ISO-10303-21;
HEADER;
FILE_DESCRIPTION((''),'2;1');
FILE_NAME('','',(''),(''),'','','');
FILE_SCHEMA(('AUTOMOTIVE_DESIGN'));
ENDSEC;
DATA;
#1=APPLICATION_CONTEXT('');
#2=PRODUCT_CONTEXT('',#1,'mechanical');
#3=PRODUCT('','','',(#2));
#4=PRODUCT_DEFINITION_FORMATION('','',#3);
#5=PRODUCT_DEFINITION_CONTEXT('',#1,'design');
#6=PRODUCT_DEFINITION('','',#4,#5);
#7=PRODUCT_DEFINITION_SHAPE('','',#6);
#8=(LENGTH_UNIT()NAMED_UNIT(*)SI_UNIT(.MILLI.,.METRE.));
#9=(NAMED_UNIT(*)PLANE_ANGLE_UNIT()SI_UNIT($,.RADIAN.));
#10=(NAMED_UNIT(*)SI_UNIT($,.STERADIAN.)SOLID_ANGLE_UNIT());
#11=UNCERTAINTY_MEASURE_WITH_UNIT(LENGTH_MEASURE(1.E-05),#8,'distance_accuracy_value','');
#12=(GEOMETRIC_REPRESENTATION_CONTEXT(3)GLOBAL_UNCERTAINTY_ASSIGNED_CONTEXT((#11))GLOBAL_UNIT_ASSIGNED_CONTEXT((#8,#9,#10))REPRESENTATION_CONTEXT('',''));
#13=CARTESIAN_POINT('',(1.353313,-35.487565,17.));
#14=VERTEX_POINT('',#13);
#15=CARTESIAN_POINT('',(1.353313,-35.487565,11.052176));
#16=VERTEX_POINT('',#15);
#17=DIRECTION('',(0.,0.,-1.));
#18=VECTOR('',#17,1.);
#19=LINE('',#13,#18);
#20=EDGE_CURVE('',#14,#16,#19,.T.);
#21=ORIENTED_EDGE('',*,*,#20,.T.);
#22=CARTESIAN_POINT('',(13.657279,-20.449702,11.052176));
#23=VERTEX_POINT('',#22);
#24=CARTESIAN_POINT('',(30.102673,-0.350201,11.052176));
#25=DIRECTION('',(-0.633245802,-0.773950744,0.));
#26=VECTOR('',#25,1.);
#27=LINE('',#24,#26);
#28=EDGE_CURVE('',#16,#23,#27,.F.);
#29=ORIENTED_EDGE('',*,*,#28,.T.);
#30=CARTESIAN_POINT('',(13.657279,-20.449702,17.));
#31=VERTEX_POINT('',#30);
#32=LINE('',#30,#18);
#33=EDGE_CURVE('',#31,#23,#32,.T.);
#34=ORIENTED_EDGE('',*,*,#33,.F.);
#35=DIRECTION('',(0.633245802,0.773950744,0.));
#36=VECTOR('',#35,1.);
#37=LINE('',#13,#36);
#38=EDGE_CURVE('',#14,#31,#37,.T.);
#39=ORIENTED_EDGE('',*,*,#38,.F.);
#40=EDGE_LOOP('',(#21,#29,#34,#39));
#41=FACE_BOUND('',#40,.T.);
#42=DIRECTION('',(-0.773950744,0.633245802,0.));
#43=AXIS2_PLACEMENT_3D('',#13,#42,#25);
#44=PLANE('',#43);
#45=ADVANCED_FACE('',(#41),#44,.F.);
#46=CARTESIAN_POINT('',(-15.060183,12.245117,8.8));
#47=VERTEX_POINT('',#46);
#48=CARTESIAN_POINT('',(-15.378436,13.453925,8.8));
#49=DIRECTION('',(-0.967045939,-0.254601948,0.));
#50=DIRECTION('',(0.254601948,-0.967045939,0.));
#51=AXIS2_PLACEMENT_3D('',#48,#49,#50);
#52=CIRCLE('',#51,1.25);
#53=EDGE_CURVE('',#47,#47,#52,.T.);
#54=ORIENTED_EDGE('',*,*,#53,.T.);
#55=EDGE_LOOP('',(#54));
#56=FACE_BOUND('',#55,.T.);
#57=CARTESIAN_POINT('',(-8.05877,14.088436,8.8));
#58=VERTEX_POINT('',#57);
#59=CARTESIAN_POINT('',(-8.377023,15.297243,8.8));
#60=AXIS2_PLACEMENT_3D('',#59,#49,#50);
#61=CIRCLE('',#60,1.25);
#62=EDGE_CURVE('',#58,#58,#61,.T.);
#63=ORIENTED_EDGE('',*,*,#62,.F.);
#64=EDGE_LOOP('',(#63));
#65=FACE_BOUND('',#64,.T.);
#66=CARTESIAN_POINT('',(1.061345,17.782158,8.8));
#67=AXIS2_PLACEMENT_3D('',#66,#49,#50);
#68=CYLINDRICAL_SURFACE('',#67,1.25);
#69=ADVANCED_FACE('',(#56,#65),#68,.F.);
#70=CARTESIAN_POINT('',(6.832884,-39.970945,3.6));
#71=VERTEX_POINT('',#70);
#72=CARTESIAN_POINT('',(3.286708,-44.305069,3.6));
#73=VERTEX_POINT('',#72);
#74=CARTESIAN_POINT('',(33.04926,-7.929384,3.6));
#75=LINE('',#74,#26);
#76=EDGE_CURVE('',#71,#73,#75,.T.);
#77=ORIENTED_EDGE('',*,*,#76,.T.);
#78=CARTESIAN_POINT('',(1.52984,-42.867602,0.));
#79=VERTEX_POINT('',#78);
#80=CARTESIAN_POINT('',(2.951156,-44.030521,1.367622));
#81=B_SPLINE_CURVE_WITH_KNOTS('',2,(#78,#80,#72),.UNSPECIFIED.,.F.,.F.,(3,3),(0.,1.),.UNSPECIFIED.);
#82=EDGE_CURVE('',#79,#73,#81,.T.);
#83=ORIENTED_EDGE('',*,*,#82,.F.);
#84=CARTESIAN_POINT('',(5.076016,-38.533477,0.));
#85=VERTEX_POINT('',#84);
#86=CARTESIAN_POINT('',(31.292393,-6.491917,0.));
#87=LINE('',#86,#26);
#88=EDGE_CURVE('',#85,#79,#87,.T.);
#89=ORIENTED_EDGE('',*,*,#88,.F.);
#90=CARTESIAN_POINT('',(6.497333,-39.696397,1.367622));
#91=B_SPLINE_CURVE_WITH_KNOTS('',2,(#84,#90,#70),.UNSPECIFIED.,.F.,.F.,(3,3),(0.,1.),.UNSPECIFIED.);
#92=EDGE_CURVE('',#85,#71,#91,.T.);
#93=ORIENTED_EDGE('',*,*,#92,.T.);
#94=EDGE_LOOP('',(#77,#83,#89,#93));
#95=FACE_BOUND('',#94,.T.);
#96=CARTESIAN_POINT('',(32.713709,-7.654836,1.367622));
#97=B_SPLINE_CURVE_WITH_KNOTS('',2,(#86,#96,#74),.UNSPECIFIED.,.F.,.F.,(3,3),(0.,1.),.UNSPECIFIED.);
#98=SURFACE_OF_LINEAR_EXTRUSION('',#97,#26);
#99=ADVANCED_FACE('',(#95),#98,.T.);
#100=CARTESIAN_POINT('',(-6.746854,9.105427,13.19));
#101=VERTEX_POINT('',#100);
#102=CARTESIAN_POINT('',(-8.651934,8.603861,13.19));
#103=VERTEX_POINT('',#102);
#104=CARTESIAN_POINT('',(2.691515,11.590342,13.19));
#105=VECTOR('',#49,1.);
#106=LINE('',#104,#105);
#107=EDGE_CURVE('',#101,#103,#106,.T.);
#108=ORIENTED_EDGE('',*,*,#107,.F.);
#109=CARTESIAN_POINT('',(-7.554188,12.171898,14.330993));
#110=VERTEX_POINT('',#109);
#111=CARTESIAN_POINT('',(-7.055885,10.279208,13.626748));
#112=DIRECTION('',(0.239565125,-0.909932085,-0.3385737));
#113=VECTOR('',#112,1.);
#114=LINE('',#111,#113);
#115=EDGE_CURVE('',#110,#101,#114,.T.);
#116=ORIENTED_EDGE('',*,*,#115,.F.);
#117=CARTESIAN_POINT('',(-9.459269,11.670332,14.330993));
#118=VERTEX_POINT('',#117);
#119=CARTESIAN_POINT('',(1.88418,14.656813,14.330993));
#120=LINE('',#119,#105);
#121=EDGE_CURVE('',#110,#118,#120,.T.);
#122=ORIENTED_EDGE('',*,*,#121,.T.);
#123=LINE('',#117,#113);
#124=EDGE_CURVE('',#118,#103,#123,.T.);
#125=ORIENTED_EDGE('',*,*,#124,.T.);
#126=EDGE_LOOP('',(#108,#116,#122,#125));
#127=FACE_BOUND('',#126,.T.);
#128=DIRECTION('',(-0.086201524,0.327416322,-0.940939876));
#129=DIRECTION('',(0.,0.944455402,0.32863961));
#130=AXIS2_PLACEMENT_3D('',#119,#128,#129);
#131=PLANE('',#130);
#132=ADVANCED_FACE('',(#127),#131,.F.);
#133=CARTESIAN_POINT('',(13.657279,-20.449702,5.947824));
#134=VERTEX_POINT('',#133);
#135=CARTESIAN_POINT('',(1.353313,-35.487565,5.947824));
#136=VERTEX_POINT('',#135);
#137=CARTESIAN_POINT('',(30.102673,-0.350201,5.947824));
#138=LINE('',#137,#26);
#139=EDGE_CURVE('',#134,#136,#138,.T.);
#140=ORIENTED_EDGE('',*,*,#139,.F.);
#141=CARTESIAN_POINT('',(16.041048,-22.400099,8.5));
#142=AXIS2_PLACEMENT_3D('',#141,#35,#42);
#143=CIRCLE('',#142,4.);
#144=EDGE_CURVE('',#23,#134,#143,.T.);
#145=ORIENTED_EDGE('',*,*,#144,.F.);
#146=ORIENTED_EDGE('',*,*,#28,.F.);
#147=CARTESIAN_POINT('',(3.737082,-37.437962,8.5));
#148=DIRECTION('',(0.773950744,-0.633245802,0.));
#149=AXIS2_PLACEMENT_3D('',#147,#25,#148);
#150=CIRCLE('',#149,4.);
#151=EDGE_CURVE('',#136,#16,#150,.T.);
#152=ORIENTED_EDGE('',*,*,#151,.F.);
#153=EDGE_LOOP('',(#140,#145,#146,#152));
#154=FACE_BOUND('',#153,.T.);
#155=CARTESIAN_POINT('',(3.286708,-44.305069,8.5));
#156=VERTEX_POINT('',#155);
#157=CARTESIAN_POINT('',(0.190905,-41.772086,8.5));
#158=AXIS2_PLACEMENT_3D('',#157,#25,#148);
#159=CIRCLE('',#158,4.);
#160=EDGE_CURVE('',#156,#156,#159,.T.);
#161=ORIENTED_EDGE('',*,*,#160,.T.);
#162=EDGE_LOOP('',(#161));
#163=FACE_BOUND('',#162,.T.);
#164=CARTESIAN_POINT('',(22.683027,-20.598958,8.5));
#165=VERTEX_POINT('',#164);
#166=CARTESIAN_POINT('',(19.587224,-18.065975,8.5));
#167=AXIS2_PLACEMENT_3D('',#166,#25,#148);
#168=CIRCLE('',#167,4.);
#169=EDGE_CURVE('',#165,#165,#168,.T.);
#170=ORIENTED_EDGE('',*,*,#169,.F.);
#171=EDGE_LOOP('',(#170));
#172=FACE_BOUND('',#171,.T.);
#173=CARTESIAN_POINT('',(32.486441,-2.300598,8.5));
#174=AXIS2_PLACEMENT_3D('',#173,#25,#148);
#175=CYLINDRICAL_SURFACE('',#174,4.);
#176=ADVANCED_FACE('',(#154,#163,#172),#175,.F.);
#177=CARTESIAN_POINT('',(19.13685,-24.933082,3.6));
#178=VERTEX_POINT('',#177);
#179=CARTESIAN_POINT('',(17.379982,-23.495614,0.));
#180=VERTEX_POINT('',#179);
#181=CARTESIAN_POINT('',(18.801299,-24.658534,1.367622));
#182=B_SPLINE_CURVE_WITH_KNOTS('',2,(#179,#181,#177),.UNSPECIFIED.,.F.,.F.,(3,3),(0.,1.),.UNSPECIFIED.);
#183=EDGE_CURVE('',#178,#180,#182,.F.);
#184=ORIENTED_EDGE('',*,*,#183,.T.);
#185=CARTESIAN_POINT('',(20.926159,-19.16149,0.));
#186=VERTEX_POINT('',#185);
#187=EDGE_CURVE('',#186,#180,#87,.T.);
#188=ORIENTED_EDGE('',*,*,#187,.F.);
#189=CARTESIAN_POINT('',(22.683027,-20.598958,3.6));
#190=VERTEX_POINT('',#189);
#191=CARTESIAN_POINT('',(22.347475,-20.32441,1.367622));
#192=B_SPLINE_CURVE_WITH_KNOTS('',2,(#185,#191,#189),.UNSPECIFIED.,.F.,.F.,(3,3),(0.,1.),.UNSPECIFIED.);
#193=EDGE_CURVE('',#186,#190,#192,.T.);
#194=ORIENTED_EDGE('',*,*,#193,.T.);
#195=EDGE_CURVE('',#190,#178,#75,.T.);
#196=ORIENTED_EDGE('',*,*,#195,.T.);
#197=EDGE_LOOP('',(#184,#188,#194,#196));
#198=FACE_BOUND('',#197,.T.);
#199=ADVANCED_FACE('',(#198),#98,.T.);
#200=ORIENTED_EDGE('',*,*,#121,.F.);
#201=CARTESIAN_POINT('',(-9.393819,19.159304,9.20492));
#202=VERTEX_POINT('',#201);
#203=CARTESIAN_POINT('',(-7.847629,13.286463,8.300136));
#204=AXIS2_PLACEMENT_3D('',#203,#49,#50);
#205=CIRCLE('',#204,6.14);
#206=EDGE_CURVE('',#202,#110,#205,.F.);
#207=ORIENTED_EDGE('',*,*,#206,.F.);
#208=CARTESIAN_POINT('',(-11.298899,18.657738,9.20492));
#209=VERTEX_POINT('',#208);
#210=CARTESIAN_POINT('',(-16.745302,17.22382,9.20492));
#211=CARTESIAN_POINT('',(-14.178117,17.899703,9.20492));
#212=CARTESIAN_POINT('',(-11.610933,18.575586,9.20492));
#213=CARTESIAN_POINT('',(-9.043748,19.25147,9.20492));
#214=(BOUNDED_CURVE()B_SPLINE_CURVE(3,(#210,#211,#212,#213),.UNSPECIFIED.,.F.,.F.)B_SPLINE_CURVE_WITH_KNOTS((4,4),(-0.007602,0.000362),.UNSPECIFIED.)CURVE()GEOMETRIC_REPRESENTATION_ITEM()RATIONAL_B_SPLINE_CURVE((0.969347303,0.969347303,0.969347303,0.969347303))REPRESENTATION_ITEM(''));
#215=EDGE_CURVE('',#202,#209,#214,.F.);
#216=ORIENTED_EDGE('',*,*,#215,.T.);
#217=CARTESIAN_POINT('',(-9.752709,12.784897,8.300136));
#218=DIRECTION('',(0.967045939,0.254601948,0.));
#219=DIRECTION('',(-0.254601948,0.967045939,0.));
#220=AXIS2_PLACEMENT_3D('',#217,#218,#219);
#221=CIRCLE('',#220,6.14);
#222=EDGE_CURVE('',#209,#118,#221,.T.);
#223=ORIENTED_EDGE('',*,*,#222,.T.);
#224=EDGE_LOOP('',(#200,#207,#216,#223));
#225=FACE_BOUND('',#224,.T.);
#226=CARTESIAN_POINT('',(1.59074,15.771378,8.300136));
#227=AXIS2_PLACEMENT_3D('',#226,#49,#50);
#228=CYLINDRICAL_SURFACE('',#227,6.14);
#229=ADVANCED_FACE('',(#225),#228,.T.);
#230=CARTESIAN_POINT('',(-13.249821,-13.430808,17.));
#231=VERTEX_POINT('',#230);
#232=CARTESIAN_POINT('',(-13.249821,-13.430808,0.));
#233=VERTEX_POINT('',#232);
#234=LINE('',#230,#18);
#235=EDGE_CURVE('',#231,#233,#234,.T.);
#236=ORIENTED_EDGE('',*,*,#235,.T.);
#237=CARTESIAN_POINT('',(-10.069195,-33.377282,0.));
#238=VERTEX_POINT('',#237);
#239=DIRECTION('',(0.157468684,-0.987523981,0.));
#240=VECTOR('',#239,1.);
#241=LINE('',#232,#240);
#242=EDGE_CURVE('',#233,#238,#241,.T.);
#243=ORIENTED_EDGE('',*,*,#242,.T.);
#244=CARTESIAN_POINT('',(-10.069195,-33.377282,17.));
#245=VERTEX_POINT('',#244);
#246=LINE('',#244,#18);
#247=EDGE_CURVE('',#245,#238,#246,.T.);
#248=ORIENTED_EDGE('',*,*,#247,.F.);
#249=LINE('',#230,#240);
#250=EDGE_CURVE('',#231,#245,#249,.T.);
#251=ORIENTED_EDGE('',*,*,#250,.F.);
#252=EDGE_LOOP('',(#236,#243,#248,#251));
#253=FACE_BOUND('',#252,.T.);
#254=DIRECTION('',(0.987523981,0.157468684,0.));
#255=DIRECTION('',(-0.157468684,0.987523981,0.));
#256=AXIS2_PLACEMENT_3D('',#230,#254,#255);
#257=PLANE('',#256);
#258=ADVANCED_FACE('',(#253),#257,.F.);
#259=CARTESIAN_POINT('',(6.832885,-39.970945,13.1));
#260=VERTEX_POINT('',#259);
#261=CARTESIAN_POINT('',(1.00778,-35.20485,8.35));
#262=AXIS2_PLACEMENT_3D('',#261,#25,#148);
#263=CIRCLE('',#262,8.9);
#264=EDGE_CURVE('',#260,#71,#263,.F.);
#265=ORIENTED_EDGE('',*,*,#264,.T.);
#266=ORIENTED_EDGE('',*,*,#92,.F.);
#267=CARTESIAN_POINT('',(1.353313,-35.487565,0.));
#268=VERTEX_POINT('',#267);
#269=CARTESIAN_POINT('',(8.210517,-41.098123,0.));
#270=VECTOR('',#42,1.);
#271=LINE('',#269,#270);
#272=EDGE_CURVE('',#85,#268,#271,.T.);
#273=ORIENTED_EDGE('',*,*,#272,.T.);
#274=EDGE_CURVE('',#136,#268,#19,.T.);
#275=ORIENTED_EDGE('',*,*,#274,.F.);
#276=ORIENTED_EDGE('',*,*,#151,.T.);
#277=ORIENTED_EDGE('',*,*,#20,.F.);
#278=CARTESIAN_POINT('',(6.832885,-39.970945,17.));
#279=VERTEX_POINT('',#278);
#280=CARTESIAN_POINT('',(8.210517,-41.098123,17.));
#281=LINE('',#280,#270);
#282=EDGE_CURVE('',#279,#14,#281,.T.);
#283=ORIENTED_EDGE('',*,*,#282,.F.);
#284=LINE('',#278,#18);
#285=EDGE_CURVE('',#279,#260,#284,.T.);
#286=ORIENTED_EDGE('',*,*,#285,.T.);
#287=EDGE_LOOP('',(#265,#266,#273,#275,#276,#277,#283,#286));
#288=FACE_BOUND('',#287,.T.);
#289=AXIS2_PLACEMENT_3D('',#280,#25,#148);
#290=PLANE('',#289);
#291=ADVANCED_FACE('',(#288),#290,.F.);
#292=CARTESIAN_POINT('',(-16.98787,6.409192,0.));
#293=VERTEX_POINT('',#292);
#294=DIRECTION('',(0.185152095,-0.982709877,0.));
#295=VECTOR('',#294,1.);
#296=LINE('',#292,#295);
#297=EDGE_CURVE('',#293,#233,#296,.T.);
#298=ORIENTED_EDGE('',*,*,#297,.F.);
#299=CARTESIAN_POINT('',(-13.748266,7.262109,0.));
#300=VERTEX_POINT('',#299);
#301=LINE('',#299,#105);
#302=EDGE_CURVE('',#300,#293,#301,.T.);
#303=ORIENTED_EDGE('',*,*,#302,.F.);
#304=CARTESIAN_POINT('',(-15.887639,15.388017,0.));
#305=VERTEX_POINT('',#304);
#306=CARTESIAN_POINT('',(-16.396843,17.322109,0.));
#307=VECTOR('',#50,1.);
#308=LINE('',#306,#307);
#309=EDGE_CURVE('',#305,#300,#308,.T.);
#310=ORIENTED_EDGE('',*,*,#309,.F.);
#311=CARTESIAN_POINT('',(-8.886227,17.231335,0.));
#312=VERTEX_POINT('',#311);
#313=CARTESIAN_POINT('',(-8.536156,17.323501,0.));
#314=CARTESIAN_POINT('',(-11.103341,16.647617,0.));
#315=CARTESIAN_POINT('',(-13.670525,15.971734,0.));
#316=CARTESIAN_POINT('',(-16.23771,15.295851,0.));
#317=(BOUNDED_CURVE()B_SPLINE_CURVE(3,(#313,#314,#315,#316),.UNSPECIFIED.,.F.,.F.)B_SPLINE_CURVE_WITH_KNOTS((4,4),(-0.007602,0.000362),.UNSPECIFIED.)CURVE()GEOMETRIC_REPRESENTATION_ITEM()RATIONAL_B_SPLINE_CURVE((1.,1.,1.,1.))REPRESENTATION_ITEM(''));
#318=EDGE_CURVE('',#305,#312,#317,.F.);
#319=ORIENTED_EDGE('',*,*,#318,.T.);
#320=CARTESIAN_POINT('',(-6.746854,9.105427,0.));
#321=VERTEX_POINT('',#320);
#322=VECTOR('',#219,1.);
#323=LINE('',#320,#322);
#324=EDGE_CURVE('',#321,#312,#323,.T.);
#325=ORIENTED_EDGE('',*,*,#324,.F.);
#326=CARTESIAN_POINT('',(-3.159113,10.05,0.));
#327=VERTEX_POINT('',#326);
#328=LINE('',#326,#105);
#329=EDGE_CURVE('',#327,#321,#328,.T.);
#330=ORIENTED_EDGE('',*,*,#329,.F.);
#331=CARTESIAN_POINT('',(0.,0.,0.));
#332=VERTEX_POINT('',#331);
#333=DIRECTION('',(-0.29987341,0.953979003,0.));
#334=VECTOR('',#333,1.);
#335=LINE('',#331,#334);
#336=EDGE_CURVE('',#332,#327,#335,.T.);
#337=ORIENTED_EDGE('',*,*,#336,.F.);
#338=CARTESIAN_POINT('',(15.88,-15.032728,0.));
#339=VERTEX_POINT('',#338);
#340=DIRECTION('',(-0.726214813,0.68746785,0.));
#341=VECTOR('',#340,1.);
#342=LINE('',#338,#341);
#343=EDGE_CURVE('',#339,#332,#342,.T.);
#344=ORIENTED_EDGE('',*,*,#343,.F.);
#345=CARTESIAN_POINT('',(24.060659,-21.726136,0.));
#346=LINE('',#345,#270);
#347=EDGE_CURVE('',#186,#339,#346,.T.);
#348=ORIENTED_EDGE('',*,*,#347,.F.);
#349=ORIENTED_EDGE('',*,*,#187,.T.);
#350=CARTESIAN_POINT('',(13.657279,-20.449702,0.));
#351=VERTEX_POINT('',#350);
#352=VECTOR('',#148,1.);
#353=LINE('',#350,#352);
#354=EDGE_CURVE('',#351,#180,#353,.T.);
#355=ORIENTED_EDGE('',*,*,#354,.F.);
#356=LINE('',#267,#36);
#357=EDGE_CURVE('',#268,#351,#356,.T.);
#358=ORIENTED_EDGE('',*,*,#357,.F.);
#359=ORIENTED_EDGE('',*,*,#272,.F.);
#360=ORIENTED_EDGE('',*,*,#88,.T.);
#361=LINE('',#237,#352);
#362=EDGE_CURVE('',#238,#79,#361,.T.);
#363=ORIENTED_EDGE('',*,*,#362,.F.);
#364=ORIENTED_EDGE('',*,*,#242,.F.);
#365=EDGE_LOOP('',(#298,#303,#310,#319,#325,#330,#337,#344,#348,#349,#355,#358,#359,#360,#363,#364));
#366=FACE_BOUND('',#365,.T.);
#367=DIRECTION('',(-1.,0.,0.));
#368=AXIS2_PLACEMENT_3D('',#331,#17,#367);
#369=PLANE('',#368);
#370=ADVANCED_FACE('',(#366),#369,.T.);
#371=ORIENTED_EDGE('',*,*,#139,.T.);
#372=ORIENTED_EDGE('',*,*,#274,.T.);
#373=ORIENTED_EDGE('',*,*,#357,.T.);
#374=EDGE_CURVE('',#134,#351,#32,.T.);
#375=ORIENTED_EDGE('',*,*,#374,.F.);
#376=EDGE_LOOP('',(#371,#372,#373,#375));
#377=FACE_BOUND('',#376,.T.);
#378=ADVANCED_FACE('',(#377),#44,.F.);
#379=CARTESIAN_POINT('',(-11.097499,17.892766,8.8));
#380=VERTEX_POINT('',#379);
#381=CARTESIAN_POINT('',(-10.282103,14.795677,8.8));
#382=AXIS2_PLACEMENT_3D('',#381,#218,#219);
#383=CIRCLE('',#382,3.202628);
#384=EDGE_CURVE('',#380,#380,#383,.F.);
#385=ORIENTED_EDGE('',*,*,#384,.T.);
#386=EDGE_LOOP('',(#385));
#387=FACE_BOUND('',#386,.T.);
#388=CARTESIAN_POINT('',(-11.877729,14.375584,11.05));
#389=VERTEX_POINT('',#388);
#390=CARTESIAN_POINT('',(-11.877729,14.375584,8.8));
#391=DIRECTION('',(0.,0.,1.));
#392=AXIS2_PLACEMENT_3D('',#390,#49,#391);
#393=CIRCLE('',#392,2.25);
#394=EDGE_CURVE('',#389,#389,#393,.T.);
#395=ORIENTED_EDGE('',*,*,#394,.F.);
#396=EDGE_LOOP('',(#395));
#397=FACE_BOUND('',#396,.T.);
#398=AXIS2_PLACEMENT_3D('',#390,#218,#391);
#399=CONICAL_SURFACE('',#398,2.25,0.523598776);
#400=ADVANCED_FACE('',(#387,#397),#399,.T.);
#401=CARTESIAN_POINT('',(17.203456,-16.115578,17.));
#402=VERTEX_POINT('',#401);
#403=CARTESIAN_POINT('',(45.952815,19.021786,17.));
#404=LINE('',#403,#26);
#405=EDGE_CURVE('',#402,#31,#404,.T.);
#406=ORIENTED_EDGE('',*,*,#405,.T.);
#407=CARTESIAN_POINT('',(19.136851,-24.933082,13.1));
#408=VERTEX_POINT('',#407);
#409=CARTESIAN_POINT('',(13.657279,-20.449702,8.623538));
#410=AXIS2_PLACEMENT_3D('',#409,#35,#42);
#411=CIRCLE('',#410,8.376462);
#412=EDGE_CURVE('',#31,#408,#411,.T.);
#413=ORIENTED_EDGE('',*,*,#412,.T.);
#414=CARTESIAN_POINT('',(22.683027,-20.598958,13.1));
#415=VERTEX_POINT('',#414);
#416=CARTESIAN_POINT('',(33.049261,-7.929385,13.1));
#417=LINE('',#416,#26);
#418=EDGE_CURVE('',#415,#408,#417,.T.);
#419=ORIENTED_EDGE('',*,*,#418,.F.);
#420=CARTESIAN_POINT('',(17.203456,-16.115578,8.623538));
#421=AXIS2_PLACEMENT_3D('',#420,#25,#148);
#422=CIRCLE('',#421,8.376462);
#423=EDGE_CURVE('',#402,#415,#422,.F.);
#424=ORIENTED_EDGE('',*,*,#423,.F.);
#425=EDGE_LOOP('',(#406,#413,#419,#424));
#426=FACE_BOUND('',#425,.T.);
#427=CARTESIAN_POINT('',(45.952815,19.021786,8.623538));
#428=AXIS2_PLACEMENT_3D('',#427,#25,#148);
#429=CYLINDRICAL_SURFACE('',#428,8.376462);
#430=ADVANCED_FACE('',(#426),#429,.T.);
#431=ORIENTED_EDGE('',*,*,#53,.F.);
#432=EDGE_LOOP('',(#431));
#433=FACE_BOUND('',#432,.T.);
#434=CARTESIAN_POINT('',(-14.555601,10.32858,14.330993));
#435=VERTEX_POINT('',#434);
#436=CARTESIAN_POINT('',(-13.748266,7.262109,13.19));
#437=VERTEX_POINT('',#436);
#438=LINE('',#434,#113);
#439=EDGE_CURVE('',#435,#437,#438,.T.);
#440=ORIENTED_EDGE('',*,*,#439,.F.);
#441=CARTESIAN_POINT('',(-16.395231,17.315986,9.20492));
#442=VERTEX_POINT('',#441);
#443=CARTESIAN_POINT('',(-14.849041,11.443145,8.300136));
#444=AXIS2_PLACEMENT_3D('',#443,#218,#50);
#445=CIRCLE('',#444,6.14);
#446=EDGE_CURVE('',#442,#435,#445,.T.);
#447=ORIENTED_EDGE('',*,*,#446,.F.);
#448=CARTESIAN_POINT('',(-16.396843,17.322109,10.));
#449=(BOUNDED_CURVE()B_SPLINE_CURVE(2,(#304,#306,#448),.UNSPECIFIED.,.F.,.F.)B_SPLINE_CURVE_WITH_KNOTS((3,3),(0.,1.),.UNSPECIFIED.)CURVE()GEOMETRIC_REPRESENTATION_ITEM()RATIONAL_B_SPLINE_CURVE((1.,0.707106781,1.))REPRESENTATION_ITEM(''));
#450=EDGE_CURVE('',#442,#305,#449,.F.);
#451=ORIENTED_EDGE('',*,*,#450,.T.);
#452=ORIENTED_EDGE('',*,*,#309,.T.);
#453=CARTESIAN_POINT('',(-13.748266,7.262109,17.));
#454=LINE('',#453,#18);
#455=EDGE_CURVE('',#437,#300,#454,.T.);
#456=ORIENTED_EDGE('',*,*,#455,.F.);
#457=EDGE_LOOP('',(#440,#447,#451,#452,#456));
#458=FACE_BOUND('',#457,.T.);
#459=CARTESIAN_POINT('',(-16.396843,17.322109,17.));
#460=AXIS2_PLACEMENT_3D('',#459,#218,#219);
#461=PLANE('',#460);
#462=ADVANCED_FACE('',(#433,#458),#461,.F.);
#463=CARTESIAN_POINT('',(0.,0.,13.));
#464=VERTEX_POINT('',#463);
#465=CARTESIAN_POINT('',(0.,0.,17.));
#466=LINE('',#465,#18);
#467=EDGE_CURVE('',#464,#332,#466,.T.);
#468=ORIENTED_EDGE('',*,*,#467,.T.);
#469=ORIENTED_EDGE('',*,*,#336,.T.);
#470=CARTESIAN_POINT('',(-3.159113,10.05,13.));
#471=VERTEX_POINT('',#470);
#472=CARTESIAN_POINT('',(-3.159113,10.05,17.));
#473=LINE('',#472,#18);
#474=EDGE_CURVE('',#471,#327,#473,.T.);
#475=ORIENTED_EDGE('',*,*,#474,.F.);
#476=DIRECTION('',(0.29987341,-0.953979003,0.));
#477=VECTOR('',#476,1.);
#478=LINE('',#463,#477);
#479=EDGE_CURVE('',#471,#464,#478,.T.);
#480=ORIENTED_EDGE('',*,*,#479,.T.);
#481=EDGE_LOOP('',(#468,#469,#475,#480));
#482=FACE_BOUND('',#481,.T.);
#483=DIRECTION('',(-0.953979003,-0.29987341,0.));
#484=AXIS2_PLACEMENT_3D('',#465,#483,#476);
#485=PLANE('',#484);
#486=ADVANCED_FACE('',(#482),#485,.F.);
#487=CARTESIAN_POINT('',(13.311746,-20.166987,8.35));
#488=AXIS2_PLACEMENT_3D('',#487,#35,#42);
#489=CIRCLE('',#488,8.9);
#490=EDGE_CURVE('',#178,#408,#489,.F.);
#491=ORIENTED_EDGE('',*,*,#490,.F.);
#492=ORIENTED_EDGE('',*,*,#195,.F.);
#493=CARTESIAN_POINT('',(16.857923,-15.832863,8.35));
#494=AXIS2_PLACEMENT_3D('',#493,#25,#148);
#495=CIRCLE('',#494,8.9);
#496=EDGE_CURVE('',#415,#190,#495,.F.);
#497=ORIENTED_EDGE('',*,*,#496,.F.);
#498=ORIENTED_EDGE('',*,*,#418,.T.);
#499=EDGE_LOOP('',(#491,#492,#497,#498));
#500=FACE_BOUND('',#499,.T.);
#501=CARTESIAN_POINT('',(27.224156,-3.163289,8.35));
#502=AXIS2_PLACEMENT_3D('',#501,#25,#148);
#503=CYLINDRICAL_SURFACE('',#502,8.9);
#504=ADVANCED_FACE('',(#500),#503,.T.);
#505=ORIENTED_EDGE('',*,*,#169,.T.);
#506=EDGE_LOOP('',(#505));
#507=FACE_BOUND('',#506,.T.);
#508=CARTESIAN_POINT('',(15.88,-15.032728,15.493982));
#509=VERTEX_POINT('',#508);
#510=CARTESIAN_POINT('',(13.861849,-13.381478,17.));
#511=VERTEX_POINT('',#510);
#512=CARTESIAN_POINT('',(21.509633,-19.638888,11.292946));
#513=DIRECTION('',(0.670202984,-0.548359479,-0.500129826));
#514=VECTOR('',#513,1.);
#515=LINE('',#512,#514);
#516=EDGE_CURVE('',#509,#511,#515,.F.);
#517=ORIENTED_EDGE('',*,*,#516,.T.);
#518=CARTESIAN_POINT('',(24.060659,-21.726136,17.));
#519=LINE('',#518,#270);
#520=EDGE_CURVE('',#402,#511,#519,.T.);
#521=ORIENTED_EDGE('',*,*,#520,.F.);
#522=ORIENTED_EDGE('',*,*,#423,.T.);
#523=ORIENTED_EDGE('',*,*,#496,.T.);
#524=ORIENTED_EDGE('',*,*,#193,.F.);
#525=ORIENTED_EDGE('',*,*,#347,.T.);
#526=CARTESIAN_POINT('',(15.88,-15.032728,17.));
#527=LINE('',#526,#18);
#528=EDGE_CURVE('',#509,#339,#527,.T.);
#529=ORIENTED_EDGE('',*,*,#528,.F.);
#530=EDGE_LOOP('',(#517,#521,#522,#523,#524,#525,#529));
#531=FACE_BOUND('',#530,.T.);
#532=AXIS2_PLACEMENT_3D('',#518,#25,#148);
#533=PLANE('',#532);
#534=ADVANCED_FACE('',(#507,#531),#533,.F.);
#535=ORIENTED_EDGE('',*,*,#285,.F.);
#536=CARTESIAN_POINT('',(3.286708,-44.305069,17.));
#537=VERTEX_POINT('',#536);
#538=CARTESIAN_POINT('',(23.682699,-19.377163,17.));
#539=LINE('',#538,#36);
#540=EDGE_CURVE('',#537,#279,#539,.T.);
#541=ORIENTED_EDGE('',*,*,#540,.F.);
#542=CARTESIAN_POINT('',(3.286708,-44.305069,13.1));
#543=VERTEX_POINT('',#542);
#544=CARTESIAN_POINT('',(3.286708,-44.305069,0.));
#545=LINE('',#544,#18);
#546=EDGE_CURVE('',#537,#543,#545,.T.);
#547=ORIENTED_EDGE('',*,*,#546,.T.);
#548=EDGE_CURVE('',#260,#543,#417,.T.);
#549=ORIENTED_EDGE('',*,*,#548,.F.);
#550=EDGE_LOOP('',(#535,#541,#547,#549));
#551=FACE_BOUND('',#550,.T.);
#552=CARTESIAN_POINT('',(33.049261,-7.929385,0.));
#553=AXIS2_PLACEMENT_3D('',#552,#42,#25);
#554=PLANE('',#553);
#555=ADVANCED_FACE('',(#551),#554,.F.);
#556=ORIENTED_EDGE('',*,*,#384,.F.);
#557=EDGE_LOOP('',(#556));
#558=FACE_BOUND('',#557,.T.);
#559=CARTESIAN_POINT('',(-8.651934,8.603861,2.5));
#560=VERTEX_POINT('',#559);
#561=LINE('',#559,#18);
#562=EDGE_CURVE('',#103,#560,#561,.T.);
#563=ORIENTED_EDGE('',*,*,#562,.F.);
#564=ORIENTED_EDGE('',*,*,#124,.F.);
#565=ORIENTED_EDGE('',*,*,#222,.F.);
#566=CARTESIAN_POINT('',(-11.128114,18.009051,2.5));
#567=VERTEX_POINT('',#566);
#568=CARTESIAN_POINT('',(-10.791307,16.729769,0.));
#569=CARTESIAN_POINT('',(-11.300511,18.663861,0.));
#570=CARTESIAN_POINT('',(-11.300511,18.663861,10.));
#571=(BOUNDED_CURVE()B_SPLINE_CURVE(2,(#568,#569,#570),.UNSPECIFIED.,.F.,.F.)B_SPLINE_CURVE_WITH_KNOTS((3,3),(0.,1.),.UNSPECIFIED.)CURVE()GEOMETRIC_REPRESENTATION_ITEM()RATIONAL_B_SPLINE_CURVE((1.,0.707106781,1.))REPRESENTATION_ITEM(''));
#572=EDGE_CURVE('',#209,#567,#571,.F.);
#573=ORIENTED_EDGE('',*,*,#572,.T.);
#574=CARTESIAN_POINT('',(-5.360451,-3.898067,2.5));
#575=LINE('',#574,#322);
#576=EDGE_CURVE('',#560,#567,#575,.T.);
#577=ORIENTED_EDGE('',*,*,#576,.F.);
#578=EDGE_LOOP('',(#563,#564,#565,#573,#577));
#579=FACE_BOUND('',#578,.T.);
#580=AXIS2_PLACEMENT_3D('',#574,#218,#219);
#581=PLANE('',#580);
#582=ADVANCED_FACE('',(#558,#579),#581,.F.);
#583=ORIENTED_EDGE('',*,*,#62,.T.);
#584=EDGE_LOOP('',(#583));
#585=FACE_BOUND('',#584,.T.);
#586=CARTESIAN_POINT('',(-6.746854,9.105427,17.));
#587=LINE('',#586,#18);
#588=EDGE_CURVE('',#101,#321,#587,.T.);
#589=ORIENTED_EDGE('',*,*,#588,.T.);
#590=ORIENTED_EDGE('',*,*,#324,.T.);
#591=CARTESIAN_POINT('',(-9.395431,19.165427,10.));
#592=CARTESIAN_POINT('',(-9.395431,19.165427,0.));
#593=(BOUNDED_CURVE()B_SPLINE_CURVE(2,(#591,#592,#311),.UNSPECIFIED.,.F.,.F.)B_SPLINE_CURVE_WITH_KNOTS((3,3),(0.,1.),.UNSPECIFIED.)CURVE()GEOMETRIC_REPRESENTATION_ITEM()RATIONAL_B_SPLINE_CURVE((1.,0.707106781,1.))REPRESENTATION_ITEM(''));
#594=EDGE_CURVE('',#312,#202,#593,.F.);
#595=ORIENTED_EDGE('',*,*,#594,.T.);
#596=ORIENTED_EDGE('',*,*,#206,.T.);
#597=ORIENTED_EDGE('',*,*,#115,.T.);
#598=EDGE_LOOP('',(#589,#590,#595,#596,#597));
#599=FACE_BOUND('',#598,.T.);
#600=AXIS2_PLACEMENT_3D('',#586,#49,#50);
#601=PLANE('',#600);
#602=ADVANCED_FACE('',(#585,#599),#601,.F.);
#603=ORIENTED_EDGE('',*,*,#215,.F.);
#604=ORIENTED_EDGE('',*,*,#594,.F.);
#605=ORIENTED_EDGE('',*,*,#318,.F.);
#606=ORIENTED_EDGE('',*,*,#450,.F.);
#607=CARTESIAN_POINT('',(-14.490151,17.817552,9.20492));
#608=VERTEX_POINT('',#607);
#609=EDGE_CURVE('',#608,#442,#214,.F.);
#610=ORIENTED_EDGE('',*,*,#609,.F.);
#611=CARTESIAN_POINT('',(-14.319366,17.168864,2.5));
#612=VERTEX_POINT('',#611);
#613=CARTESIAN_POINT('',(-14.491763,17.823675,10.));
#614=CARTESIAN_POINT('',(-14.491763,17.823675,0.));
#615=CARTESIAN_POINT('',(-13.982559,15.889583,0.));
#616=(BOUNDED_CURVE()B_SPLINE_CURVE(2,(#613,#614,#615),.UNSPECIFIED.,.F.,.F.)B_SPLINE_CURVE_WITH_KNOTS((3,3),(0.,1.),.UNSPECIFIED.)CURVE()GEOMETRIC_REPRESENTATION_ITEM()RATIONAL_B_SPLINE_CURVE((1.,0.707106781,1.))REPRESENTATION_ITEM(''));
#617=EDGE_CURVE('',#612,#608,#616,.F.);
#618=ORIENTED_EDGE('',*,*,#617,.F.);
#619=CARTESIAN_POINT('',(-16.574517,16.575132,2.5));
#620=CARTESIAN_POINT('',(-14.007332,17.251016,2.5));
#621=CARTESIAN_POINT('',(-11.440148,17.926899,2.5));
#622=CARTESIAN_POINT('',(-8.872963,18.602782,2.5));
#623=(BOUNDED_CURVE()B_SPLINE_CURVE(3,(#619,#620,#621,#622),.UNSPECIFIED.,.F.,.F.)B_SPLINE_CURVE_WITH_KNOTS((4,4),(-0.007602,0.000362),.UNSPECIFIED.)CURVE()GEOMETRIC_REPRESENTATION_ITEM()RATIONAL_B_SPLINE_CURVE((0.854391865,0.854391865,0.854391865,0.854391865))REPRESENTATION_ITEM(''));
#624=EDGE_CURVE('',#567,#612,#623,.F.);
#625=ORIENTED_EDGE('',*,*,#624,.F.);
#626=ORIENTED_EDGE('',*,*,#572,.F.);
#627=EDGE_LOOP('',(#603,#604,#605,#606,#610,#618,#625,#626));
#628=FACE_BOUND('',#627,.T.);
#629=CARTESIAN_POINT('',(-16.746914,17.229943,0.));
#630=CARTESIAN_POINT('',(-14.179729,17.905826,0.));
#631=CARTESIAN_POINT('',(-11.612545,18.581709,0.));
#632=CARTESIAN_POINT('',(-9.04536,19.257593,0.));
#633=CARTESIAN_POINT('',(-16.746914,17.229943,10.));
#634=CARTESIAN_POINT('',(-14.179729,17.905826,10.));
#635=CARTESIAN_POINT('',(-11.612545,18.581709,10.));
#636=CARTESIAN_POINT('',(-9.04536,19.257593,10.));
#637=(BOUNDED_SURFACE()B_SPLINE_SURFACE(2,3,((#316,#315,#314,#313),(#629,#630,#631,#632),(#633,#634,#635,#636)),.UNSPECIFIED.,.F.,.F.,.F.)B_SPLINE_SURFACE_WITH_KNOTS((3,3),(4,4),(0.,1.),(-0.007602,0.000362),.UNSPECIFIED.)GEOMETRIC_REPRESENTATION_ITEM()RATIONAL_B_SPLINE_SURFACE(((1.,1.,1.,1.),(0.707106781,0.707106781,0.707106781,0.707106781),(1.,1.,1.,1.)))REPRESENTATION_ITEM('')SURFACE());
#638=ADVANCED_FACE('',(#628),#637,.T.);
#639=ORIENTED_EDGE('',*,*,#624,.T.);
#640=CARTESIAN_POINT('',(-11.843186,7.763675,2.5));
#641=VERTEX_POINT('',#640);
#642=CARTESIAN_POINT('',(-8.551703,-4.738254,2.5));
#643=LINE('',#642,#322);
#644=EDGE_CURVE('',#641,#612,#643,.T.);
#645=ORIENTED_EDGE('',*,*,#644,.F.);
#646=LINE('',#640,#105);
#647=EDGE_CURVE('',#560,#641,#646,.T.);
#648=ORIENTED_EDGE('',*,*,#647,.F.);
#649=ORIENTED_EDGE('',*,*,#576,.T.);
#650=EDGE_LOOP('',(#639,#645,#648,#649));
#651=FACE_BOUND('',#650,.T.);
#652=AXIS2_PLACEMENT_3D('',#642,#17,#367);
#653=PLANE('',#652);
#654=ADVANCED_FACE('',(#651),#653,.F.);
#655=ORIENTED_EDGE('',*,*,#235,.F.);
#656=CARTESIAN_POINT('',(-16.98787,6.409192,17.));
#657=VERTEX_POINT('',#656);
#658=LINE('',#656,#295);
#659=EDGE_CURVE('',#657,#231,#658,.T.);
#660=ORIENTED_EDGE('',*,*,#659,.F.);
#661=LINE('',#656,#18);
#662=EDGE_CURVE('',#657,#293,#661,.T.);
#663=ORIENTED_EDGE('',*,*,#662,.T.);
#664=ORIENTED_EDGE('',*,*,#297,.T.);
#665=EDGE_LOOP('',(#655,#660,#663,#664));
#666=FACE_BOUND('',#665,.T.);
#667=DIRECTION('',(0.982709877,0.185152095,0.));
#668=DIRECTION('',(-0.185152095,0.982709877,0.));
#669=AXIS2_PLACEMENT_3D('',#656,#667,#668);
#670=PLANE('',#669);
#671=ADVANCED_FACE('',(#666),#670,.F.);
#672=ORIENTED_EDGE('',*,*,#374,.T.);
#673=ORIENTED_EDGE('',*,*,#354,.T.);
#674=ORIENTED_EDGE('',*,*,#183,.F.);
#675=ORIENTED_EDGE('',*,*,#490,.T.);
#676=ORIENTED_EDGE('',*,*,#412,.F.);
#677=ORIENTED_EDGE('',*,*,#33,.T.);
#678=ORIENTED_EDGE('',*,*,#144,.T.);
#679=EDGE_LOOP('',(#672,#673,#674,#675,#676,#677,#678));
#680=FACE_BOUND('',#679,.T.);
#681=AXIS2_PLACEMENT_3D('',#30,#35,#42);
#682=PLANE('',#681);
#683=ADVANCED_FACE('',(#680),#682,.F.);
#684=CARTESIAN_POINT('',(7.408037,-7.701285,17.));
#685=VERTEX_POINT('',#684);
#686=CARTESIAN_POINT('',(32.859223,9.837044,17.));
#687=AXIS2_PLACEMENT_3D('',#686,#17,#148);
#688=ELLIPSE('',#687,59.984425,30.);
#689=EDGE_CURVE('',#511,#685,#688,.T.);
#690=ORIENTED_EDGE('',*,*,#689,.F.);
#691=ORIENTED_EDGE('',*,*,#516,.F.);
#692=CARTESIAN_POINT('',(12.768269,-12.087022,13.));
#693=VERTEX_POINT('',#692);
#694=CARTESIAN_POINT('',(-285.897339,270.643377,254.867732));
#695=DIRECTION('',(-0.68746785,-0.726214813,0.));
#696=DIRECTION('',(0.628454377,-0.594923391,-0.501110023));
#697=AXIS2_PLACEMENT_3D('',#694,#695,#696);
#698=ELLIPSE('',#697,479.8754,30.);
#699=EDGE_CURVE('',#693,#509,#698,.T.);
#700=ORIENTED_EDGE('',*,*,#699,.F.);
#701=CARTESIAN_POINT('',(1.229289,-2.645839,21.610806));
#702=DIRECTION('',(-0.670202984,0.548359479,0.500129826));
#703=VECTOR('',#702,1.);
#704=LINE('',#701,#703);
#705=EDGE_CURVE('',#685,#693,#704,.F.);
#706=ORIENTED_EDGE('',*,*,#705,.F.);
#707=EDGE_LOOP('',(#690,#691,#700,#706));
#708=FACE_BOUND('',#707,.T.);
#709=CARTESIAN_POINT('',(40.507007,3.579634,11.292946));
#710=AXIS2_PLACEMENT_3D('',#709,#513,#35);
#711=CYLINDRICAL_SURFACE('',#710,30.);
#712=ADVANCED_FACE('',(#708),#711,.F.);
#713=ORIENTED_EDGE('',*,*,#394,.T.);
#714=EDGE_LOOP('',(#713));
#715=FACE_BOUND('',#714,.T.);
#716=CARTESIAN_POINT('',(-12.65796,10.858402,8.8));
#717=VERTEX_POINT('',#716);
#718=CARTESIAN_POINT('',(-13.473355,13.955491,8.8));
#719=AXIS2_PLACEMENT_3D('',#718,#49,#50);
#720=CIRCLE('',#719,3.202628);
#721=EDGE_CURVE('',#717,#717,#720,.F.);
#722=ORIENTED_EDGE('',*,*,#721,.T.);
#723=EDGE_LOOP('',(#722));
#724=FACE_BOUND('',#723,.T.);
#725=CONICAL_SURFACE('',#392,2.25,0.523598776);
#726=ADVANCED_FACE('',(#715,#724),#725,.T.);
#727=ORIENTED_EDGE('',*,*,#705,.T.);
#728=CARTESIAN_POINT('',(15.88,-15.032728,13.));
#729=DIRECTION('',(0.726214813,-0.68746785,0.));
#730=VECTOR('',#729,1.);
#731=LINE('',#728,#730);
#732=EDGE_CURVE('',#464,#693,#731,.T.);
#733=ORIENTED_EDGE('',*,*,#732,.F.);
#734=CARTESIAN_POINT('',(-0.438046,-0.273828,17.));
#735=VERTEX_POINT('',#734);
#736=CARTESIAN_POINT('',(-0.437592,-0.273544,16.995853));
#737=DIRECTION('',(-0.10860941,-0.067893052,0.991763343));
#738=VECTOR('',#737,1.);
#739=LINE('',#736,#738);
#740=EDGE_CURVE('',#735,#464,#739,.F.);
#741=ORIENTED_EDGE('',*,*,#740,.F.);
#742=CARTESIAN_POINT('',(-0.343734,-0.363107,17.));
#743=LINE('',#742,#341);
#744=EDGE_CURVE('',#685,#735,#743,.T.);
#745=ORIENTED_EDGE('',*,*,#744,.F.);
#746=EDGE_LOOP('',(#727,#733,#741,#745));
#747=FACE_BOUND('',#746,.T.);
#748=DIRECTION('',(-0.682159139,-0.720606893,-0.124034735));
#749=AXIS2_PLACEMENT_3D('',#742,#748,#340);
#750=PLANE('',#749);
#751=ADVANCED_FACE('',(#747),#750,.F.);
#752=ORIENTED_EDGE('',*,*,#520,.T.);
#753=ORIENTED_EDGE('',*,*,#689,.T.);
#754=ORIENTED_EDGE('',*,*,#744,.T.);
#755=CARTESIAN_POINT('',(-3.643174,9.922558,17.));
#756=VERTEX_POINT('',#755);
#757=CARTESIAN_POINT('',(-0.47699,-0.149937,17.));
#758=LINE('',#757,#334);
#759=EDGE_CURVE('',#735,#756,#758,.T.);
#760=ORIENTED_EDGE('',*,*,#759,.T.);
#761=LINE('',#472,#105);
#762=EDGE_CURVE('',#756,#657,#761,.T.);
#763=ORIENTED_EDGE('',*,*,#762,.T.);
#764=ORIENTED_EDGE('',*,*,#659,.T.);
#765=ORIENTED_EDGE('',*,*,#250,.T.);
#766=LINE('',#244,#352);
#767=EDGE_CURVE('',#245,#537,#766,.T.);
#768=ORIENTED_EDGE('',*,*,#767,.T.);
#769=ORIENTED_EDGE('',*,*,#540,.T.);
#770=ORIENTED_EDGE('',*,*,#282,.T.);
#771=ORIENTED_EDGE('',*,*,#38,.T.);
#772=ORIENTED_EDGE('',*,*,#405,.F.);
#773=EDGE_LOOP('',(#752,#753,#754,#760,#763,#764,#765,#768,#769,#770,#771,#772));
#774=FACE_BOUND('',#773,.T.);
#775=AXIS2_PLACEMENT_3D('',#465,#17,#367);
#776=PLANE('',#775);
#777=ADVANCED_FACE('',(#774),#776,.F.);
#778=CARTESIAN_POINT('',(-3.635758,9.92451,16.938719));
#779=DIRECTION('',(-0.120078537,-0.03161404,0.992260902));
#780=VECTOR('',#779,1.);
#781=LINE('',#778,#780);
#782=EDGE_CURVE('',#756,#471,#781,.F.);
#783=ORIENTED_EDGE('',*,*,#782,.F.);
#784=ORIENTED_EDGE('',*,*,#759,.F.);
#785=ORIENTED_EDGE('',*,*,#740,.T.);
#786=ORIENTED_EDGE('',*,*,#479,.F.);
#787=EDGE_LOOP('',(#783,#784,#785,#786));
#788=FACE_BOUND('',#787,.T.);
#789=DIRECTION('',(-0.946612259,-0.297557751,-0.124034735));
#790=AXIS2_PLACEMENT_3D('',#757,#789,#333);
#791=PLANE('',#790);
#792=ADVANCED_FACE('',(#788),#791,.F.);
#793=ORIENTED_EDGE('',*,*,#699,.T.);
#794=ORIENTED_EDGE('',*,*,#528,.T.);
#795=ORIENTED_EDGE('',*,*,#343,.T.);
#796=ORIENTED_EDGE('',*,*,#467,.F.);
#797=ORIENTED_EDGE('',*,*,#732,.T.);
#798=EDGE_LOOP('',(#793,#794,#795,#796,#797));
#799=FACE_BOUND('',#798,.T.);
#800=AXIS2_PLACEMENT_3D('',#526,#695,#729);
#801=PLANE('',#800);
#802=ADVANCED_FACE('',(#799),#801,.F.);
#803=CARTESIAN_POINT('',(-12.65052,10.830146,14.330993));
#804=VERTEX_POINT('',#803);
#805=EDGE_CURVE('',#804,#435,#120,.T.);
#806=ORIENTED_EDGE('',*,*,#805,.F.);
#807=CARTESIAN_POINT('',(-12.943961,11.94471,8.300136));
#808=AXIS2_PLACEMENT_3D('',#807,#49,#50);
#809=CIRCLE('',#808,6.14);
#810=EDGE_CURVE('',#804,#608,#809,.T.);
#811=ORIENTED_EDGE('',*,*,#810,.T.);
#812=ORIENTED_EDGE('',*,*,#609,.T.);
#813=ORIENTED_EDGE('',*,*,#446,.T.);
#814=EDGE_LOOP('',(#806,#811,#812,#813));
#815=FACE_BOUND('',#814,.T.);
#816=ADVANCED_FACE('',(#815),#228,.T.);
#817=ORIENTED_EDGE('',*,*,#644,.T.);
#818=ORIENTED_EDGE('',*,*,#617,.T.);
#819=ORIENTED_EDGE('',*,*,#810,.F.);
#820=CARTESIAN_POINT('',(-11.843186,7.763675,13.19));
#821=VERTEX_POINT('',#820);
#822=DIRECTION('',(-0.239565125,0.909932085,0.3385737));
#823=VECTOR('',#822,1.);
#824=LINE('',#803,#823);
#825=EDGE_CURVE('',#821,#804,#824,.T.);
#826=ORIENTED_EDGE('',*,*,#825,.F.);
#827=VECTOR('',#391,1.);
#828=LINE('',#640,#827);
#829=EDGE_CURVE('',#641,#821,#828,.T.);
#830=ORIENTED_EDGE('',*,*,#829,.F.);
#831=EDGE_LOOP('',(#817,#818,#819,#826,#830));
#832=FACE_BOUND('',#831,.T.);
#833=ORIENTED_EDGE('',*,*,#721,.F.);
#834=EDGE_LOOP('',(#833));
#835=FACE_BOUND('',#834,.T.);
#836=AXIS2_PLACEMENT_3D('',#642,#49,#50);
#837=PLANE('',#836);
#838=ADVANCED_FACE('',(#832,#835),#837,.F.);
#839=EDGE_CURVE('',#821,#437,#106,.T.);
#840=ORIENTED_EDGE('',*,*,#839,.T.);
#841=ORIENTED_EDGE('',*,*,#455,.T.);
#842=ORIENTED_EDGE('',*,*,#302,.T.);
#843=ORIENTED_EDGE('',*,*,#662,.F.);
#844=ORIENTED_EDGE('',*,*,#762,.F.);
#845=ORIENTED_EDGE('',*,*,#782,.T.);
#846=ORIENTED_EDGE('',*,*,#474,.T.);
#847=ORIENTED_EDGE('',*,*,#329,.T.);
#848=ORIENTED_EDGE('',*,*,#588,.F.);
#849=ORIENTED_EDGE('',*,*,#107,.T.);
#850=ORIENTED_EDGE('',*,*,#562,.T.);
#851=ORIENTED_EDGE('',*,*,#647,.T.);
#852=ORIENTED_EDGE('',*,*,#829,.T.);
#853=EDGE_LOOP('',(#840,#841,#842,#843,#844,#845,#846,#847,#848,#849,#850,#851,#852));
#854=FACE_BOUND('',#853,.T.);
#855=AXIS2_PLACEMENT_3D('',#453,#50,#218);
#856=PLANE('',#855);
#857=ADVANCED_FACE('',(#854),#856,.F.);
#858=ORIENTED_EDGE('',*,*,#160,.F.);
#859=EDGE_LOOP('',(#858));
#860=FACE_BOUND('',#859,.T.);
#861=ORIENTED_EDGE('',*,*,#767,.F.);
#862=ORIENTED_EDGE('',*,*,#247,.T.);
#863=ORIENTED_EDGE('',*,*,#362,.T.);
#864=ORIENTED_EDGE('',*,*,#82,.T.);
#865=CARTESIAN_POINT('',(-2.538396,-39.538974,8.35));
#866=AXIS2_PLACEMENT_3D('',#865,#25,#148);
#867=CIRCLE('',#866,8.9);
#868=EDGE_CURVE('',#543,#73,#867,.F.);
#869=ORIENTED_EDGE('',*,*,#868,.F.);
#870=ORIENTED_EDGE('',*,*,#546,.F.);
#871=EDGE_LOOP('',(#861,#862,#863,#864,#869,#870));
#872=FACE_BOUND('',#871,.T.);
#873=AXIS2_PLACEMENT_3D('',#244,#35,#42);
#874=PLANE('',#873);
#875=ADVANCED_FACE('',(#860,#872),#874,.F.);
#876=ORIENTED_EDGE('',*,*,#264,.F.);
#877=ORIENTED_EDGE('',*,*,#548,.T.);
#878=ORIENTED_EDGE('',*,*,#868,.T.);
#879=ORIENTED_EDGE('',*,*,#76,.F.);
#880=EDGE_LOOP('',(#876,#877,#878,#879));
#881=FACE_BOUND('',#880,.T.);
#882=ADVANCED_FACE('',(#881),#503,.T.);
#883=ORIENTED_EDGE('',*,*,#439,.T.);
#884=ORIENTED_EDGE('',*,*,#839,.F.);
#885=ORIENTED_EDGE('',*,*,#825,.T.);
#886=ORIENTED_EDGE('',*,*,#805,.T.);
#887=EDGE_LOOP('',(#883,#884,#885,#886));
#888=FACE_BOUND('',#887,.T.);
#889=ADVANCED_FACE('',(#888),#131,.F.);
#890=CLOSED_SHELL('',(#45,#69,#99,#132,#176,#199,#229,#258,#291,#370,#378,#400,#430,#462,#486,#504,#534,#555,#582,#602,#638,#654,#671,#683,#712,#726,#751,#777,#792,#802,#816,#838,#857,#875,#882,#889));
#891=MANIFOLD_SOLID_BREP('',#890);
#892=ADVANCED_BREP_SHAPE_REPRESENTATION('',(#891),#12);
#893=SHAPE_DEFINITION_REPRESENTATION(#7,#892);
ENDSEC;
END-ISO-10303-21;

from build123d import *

# Parameters (mm, degrees)
BOSS_EXTRUDE1_DEPTH           = 17
CUT_EXTRUDE1_DEPTH            = 17
SKETCH3_R                     = 1.25
CUT_EXTRUDE2_DEPTH            = 17
CUT_EXTRUDE3_START            = -10.402815
SKETCH4_W                     = 3.3
SKETCH4_H                     = 12.499682623
CUT_EXTRUDE3_DEPTH            = 10.402815
SKETCH5_R                     = 2.25
SKETCH5_R_2                   = 1.25
EXTRUDE_THIN1_DEPTH           = 1.65
EXTRUDE_THIN1_TAPER           = -30
EXTRUDE_THIN1_OTHER_WAY_DEPTH = 1.65
EXTRUDE_THIN1_OTHER_WAY_TAPER = -30
SKETCH6_R                     = 1.25
CUT_EXTRUDE4_DEPTH            = 58.713758796
CUT_EXTRUDE5_DEPTH            = 47
CUT_EXTRUDE6_DEPTH            = 51
SKETCH9_R                     = 4
CUT_EXTRUDE7_DEPTH            = 51
CHAMFER2_SIZE                 = 4
CHAMFER2_SIZE_2               = 0.5
FILLET3_R                     = 30
FILLET4_SIZE                  = 2
FILLET4_SIZE_2                = 10


with BuildPart() as part:
    # Sketch1 → Boss-Extrude1 (new body)
    with BuildSketch(Plane.XY):
        Polygon((0, 0), (-3.159113316, 10.05), (-6.746853749, 9.105426772), (-9.395430715, 19.165426772), (-16.396843313, 17.322108667), (-13.748266347, 7.262108667), (-16.987870242, 6.409192141), (-13.249821349, -13.430807859), (-10.069194805, -33.377281726), (4.664340434, -45.432247006), (8.210516928, -41.098122841), (1.353313338, -35.487565032), (13.657279278, -20.449702081), (20.514482868, -26.06025989), (24.060659362, -21.726135725), (15.88, -15.032727593), align=None)
    extrude(amount=BOSS_EXTRUDE1_DEPTH)

    # Sketch2 → Cut-Extrude1 (cut)
    with BuildSketch(Plane(origin=(-11.069057434, -2.914239618, 0), x_dir=(0, 0, 1), z_dir=(-0.9670459389139427, -0.2546019482055291, 0))):
        with BuildLine():
            Line((14.33099337, 13.694095472), (13.19, 10.523128091))
            Line((13.19, 10.523128091), (20.415721384, 10.523128091))
            Line((20.415721384, 10.523128091), (20.415721384, 21.928823046))
            Line((20.415721384, 21.928823046), (-2.093019815, 21.928823046))
            Line((-2.093019815, 21.928823046), (-2.093019815, 20.981086575))
            Line((-2.093019815, 20.981086575), (9.161350785, 20.925943092))
            ThreePointArc((9.161350785, 20.925943092), (13.295140538, 18.417290029), (14.33099337, 13.694095472))
        make_face()
    extrude(amount=-CUT_EXTRUDE1_DEPTH, mode=Mode.SUBTRACT)

    # Sketch3 → Cut-Extrude2 (cut)
    with BuildSketch(Plane(origin=(-11.069057434, -2.914239618, 0), x_dir=(0, 0, 1), z_dir=(-0.9670459389139427, -0.2546019482055291, 0))):
        with Locations(Location((8.8, 16.925943092, 0), (0, 0, 270))):
            Circle(SKETCH3_R)
    extrude(amount=-CUT_EXTRUDE2_DEPTH, mode=Mode.SUBTRACT)

    # Sketch4 → Cut-Extrude3 (cut)
    with BuildSketch(Plane(origin=(-5.327785879, 20.236348285, 0), x_dir=(0.9670459389139427, 0.2546019482055291, 0), z_dir=(-0.2546019482055291, 0.9670459389139427, 0)).offset(CUT_EXTRUDE3_START)):
        with Locations((-7.826258123, -8.749841312)):
            Rectangle(SKETCH4_W, SKETCH4_H)
    extrude(amount=CUT_EXTRUDE3_DEPTH, mode=Mode.SUBTRACT)

    # Sketch5 → Extrude-Thin1 (add)
    with BuildSketch(Plane(origin=(-7.568351135, -1.992580565, 0), x_dir=(0, 0, 1), z_dir=(-0.9670459389139427, -0.25460194820552917, 0))):
        with Locations((8.8, 16.925943092)):
            Circle(SKETCH5_R)
        with Locations((8.8, 16.925943092)):
            Circle(SKETCH5_R_2, mode=Mode.SUBTRACT)
    extrude(amount=EXTRUDE_THIN1_DEPTH, taper=EXTRUDE_THIN1_TAPER)

    # Sketch5 → Extrude-Thin1 other way (add)
    with BuildSketch(Plane(origin=(-7.568351135, -1.992580565, 0), x_dir=(0, 0, 1), z_dir=(-0.9670459389139427, -0.25460194820552917, 0))):
        with Locations((8.8, 16.925943092)):
            Circle(SKETCH5_R)
        with Locations((8.8, 16.925943092)):
            Circle(SKETCH5_R_2, mode=Mode.SUBTRACT)
    extrude(amount=-EXTRUDE_THIN1_OTHER_WAY_DEPTH, taper=EXTRUDE_THIN1_OTHER_WAY_TAPER)

    # Sketch6 → Cut-Extrude4 (cut, through all)
    with BuildSketch(Plane(origin=(-11.069057434, -2.914239618, 0), x_dir=(0, 0, 1), z_dir=(-0.9670459389139427, -0.2546019482055291, 0))):
        with Locations(Location((8.8, 16.925943092, 0), (0, 0, 270))):
            Circle(SKETCH6_R)
    extrude(amount=-CUT_EXTRUDE4_DEPTH, mode=Mode.SUBTRACT)

    # Sketch7 → Cut-Extrude5 (cut)
    with BuildSketch(Plane(origin=(-20.395990741, -24.927906579, 0), x_dir=(-0.773950743756153, 0.633245802385849, 0), z_dir=(-0.6332458023858489, -0.7739507437561529, 0))):
        with BuildLine():
            add(Edge.make_bspline(
                [(-28.329749458, 0), (-30.166192179, -1.367621789), (-30.599748983, -3.6)],
                knots=[0, 0, 0, 1, 1, 1], degree=2))
            Line((-28.329749458, 0), (-32.379749458, 0))
            Line((-32.379749458, 0), (-32.379749458, -17))
            Line((-32.379749458, -17), (-30.599749458, -17))
            Line((-30.599749458, -17), (-30.599749458, -13.1))
            ThreePointArc((-30.599749458, -13.1), (-31.973295872, -8.349999931), (-30.599748983, -3.6))
        make_face()
    extrude(amount=-CUT_EXTRUDE5_DEPTH, mode=Mode.SUBTRACT)

    # Sketch8 → Cut-Extrude6 (cut)
    with BuildSketch(Plane(origin=(-4.545848307, -5.555919463, 0), x_dir=(0.7739507437561534, -0.6332458023858486, 0), z_dir=(-0.6332458023858486, -0.7739507437561534, 0))):
        with BuildLine():
            Line((30.599749458, 13.1), (30.599749458, 17))
            Line((30.599749458, 17), (23.519749458, 17))
            ThreePointArc((23.519749458, 17), (27.561296191, 15.960500224), (30.599749458, 13.1))
        make_face()
    extrude(amount=-CUT_EXTRUDE6_DEPTH, mode=Mode.SUBTRACT)

    # Sketch9 → Cut-Extrude7 (cut)
    with BuildSketch(Plane(origin=(-20.395990741, -24.927906579, 0), x_dir=(-0.773950743756153, 0.633245802385849, 0), z_dir=(-0.6332458023858489, -0.7739507437561529, 0))):
        with Locations(Location((-26.599749458, -8.5, 0), (0, 0, 180))):
            Circle(SKETCH9_R)
    extrude(amount=-CUT_EXTRUDE7_DEPTH, mode=Mode.SUBTRACT)

    # Chamfer2
    # the kernel refuses this chamfer: 4, 0.5 mm, written as the material it takes off along each edge
    with BuildSketch(Plane(origin=(23.430476857, -22.180351132, 17), x_dir=(0.003280548241470475, 0.003465446024389789, -0.9999886142787264), z_dir=(-0.7262148132107521, 0.6874678502106645, 0))) as chamfer2_piece_1_section:
        Polygon((CHAMFER2_SIZE * 0.999988614279, CHAMFER2_SIZE * 0.00477192968437), (-CHAMFER2_SIZE_2 * 0.00477192968437, CHAMFER2_SIZE_2 * 0.999988614279), (0, 0), align=None)
    chamfer2_piece_1 = extrude(amount=42.660867212, mode=Mode.PRIVATE)
    chamfer2_piece_1 = split(chamfer2_piece_1, bisect_by=Plane(origin=(2.714923218, -8.636910301, 15.455863369), z_dir=(0.9539790028805075, 0.2998734100635013, 0)), keep=Keep.TOP, mode=Mode.PRIVATE)
    chamfer2_piece_1 = split(chamfer2_piece_1, bisect_by=Plane(origin=(6.949444097, -7.725754787, 15.455863369), z_dir=(0.6332458023858455, 0.7739507437561558, 0)), keep=Keep.TOP, mode=Mode.PRIVATE)
    add(chamfer2_piece_1, mode=Mode.SUBTRACT)
    with BuildSketch(Plane(origin=(3.117792699, -9.918547862, 17), x_dir=(0.0045523207221114005, 0.0014309748270353465, -0.9999886142787264), z_dir=(-0.2998734100635013, 0.9539790028805075, 0))) as chamfer2_piece_2_section:
        Polygon((CHAMFER2_SIZE * 0.999988614279, CHAMFER2_SIZE * 0.00477192968437), (-CHAMFER2_SIZE_2 * 0.00477192968437, CHAMFER2_SIZE_2 * 0.999988614279), (0, 0), align=None)
    chamfer2_piece_2 = extrude(amount=31.328882119, mode=Mode.PRIVATE)
    chamfer2_piece_2 = split(chamfer2_piece_2, bisect_by=Plane(origin=(-6.749370263, 6.389259735, 15.513791759), z_dir=(0.6874678502106645, 0.7262148132107521, 0)), keep=Keep.TOP, mode=Mode.PRIVATE)
    add(chamfer2_piece_2, mode=Mode.SUBTRACT)
    with BuildSketch(Plane(origin=(3.117792699, -9.918547862, 17), x_dir=(0.0045523207221114005, 0.0014309748270353465, -0.9999886142787264), z_dir=(-0.2998734100635013, 0.9539790028805075, 0))) as chamfer2_piece_3a_section:
        Polygon((CHAMFER2_SIZE * 0.999988614279, CHAMFER2_SIZE * 0.00477192968437), (-CHAMFER2_SIZE_2 * 0.00477192968437, CHAMFER2_SIZE_2 * 0.999988614279), (0, 0), align=None)
    chamfer2_piece_3a = extrude(amount=31.328882119, mode=Mode.PRIVATE)
    chamfer2_piece_3a = split(chamfer2_piece_3a, bisect_by=Plane(origin=(3.183687603, -3.013822952, 15.535130807), z_dir=(-0.6874678502106645, -0.7262148132107521, 0)), keep=Keep.TOP, mode=Mode.PRIVATE)
    with BuildSketch(Plane(origin=(23.430476857, -22.180351132, 17), x_dir=(0.003280548241470475, 0.003465446024389789, -0.9999886142787264), z_dir=(-0.7262148132107521, 0.6874678502106645, 0))) as chamfer2_piece_3b_section:
        Polygon((CHAMFER2_SIZE * 0.999988614279, CHAMFER2_SIZE * 0.00477192968437), (-CHAMFER2_SIZE_2 * 0.00477192968437, CHAMFER2_SIZE_2 * 0.999988614279), (0, 0), align=None)
    chamfer2_piece_3b = extrude(amount=42.660867212, mode=Mode.PRIVATE)
    chamfer2_piece_3b = split(chamfer2_piece_3b, bisect_by=Plane(origin=(-1.314629282, 4.18219385, 15.535130807), z_dir=(-0.9539790028805075, -0.2998734100635013, 0)), keep=Keep.TOP, mode=Mode.PRIVATE)
    chamfer2_piece_3 = chamfer2_piece_3a & chamfer2_piece_3b
    add(chamfer2_piece_3, mode=Mode.SUBTRACT)

    # Fillet3
    # the kernel refuses this fillet: 30 mm, written as the material it adds along each edge
    with BuildSketch(Plane(origin=(19.498535053, -17.993409719, 10.299717624), x_dir=(0.3870758506648627, -0.3167051128458923, 0.865950435838763), z_dir=(-0.6702029838732583, 0.5483594785692364, 0.500129825815914))) as fillet3_piece_1_section:
        with BuildLine():
            CenterArc((FILLET3_R * 0.071988838012, FILLET3_R), FILLET3_R, 261.764893066, 8.235106934)
            Line((-FILLET3_R * 0.071246536041, FILLET3_R * 0.0103113481403), (0, 0))
            Line((0, 0), (FILLET3_R * 0.071988838012, 0))
        make_face()
    fillet3_piece_1 = extrude(amount=18.796249028, mode=Mode.PRIVATE)
    fillet3_piece_1 = split(fillet3_piece_1, bisect_by=Plane(origin=(13.825719707, -13.08805278, 14.411900392), z_dir=(-0.6874678502106645, -0.7262148132107521, 0)), keep=Keep.TOP, mode=Mode.PRIVATE)
    fillet3_piece_1 = split(fillet3_piece_1, bisect_by=Plane(origin=(13.532386136, -13.397919176, 17), z_dir=(0, 0, -1)), keep=Keep.TOP, mode=Mode.PRIVATE)
    fillet3_piece_1 = fillet3_piece_1 - Plane(origin=(19.447051663, -18.23729319, 8.5), x_dir=(0.773950743756153, -0.633245802385849, 0), z_dir=(-0.633245802385849, -0.773950743756153, 0)) * Cylinder(4, 47, mode=Mode.PRIVATE)
    add(fillet3_piece_1)

    # Fillet4
    # an asymmetric fillet: 10, 2 mm, written as the material it takes off along each edge
    with BuildSketch(Plane(origin=(14.780717757, 25.530475477, 0), x_dir=(0.2546019482055286, -0.9670459389139429, 0), z_dir=(-0.9670459389139429, -0.2546019482055286, 0))) as fillet4_piece_1:
        with BuildLine():
            Bezier((FILLET4_SIZE, 0), (0, 0), (0, FILLET4_SIZE_2), weights=[1, 0.707106781, 1])
            Line((0, FILLET4_SIZE_2), (0, 0))
            Line((0, 0), (FILLET4_SIZE, 0))
        make_face()
    extrude(amount=57.24, mode=Mode.SUBTRACT)


solid = part.part
